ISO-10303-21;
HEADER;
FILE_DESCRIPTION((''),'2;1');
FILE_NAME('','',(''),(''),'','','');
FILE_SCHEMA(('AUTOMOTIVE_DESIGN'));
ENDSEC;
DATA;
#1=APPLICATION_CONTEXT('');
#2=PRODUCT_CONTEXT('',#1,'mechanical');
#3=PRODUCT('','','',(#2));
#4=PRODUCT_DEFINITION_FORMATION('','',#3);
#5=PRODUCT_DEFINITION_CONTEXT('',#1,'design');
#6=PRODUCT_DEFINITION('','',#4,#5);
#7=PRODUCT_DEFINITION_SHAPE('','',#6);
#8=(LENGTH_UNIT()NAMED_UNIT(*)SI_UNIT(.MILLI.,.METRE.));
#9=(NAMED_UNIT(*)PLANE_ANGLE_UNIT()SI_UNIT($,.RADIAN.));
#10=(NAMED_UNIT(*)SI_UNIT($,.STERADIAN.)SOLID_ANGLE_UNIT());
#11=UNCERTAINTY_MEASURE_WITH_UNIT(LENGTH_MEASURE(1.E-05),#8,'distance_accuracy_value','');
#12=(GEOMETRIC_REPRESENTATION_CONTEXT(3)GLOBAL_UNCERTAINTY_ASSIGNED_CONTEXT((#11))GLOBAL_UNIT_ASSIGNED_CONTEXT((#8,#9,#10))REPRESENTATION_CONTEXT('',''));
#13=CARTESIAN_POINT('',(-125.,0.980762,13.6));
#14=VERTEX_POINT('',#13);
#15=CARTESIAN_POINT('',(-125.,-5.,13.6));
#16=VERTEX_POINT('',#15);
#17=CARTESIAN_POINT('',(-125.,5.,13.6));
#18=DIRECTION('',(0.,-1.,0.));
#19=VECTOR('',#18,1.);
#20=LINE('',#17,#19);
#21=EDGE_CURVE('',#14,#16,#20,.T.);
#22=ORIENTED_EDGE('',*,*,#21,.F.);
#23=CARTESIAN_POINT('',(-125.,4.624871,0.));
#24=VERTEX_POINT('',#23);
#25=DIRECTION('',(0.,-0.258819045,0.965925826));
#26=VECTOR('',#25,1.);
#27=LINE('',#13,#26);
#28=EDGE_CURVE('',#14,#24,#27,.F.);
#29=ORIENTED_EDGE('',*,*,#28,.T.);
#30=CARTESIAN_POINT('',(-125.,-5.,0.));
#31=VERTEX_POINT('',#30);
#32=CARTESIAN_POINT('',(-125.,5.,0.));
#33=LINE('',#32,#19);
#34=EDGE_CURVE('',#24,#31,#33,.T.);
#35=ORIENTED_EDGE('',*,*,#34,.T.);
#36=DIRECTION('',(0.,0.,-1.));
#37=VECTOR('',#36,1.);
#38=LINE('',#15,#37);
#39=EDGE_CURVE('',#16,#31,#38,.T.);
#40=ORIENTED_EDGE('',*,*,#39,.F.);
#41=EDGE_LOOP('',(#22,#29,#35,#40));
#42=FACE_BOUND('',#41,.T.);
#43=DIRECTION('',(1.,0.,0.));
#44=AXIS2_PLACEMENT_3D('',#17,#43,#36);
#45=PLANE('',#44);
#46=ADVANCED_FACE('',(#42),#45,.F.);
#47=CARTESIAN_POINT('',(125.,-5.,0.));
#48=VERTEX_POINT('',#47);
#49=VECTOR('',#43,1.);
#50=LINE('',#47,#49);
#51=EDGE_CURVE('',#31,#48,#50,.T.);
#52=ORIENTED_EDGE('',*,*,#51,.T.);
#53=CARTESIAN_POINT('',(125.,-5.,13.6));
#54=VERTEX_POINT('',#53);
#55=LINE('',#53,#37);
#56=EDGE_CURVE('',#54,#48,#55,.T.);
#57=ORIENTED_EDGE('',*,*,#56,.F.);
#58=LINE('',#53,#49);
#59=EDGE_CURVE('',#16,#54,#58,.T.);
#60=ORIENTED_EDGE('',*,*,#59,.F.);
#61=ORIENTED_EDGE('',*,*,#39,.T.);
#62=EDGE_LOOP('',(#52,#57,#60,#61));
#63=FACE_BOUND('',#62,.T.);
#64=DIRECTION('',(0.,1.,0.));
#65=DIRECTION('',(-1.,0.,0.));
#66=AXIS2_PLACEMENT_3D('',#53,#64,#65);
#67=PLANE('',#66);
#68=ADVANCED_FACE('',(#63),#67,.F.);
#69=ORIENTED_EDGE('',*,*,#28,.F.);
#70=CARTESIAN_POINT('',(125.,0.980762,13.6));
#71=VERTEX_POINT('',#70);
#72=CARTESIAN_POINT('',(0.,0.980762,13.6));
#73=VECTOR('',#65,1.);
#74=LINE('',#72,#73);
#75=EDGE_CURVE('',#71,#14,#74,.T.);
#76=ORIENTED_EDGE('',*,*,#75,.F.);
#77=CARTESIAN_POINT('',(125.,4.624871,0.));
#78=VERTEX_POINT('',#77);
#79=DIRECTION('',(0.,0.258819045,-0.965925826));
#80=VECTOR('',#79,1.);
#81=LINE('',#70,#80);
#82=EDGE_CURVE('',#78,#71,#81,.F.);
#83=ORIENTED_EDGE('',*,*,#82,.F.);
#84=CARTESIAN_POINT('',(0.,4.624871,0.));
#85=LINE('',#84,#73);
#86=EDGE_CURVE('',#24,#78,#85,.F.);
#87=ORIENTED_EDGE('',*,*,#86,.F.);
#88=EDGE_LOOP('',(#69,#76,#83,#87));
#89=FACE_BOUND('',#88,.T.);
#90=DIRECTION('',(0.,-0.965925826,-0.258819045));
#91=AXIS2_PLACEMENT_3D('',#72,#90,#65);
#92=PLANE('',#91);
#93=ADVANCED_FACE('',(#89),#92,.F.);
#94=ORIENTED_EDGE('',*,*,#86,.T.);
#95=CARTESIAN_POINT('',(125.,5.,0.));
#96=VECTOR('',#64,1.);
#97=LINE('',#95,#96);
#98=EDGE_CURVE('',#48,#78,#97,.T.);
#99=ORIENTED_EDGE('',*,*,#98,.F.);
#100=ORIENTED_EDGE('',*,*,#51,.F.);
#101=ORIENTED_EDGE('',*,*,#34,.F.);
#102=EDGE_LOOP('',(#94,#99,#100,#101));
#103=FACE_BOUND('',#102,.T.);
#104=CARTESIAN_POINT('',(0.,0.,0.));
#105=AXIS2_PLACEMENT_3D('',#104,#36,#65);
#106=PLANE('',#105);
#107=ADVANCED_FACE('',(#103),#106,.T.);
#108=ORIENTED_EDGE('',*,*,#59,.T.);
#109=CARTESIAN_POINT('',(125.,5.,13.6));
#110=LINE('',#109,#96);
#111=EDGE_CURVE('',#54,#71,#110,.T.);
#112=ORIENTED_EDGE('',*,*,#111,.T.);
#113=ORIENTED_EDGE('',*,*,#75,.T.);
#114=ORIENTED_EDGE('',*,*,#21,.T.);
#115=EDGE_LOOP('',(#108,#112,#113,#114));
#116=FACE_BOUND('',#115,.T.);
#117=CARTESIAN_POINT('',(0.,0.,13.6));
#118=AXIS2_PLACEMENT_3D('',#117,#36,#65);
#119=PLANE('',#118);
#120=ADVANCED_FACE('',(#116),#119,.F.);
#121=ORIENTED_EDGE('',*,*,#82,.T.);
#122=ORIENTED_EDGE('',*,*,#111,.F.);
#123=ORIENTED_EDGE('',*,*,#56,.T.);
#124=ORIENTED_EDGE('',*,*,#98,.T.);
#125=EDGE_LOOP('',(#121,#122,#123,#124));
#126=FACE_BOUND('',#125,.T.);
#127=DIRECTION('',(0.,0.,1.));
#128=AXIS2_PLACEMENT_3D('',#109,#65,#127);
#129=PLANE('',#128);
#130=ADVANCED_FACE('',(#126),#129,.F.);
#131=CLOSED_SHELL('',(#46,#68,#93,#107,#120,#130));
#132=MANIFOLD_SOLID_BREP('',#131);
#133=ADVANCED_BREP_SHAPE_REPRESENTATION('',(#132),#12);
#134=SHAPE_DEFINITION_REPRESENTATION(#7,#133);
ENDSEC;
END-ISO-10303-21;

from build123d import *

# Parameters (mm, degrees)
CROQUIS1_W              = 250
CROQUIS1_H              = 10
SALIENTE_EXTRUIR1_DEPTH = 13.6
CHAFL_N1_SIZE           = 15
CHAFL_N1_SIZE_2         = 4.019237886


with BuildPart() as part:
    # Croquis1 → Saliente-Extruir1 (new body)
    with BuildSketch(Plane.XY):
        Rectangle(CROQUIS1_W, CROQUIS1_H)
    extrude(amount=SALIENTE_EXTRUIR1_DEPTH)

    # Chaflán1
    # the kernel refuses this chamfer: 15, 4.019237886 mm, written as the material it takes off along each edge
    with BuildSketch(Plane(origin=(163.950823553, 5, 13.6), x_dir=(0, 0.0099671465771564, -0.9999503267608394), z_dir=(-1, 0, 0))) as chafl_n1_piece_1:
        Polygon((CHAFL_N1_SIZE * 0.999950326761, CHAFL_N1_SIZE * 0.00996714657716), (-CHAFL_N1_SIZE_2 * 0.00996714657831, CHAFL_N1_SIZE_2 * 0.999950326877), (0, 0), align=None)
    extrude(amount=327.901647106, mode=Mode.SUBTRACT)


solid = part.part
